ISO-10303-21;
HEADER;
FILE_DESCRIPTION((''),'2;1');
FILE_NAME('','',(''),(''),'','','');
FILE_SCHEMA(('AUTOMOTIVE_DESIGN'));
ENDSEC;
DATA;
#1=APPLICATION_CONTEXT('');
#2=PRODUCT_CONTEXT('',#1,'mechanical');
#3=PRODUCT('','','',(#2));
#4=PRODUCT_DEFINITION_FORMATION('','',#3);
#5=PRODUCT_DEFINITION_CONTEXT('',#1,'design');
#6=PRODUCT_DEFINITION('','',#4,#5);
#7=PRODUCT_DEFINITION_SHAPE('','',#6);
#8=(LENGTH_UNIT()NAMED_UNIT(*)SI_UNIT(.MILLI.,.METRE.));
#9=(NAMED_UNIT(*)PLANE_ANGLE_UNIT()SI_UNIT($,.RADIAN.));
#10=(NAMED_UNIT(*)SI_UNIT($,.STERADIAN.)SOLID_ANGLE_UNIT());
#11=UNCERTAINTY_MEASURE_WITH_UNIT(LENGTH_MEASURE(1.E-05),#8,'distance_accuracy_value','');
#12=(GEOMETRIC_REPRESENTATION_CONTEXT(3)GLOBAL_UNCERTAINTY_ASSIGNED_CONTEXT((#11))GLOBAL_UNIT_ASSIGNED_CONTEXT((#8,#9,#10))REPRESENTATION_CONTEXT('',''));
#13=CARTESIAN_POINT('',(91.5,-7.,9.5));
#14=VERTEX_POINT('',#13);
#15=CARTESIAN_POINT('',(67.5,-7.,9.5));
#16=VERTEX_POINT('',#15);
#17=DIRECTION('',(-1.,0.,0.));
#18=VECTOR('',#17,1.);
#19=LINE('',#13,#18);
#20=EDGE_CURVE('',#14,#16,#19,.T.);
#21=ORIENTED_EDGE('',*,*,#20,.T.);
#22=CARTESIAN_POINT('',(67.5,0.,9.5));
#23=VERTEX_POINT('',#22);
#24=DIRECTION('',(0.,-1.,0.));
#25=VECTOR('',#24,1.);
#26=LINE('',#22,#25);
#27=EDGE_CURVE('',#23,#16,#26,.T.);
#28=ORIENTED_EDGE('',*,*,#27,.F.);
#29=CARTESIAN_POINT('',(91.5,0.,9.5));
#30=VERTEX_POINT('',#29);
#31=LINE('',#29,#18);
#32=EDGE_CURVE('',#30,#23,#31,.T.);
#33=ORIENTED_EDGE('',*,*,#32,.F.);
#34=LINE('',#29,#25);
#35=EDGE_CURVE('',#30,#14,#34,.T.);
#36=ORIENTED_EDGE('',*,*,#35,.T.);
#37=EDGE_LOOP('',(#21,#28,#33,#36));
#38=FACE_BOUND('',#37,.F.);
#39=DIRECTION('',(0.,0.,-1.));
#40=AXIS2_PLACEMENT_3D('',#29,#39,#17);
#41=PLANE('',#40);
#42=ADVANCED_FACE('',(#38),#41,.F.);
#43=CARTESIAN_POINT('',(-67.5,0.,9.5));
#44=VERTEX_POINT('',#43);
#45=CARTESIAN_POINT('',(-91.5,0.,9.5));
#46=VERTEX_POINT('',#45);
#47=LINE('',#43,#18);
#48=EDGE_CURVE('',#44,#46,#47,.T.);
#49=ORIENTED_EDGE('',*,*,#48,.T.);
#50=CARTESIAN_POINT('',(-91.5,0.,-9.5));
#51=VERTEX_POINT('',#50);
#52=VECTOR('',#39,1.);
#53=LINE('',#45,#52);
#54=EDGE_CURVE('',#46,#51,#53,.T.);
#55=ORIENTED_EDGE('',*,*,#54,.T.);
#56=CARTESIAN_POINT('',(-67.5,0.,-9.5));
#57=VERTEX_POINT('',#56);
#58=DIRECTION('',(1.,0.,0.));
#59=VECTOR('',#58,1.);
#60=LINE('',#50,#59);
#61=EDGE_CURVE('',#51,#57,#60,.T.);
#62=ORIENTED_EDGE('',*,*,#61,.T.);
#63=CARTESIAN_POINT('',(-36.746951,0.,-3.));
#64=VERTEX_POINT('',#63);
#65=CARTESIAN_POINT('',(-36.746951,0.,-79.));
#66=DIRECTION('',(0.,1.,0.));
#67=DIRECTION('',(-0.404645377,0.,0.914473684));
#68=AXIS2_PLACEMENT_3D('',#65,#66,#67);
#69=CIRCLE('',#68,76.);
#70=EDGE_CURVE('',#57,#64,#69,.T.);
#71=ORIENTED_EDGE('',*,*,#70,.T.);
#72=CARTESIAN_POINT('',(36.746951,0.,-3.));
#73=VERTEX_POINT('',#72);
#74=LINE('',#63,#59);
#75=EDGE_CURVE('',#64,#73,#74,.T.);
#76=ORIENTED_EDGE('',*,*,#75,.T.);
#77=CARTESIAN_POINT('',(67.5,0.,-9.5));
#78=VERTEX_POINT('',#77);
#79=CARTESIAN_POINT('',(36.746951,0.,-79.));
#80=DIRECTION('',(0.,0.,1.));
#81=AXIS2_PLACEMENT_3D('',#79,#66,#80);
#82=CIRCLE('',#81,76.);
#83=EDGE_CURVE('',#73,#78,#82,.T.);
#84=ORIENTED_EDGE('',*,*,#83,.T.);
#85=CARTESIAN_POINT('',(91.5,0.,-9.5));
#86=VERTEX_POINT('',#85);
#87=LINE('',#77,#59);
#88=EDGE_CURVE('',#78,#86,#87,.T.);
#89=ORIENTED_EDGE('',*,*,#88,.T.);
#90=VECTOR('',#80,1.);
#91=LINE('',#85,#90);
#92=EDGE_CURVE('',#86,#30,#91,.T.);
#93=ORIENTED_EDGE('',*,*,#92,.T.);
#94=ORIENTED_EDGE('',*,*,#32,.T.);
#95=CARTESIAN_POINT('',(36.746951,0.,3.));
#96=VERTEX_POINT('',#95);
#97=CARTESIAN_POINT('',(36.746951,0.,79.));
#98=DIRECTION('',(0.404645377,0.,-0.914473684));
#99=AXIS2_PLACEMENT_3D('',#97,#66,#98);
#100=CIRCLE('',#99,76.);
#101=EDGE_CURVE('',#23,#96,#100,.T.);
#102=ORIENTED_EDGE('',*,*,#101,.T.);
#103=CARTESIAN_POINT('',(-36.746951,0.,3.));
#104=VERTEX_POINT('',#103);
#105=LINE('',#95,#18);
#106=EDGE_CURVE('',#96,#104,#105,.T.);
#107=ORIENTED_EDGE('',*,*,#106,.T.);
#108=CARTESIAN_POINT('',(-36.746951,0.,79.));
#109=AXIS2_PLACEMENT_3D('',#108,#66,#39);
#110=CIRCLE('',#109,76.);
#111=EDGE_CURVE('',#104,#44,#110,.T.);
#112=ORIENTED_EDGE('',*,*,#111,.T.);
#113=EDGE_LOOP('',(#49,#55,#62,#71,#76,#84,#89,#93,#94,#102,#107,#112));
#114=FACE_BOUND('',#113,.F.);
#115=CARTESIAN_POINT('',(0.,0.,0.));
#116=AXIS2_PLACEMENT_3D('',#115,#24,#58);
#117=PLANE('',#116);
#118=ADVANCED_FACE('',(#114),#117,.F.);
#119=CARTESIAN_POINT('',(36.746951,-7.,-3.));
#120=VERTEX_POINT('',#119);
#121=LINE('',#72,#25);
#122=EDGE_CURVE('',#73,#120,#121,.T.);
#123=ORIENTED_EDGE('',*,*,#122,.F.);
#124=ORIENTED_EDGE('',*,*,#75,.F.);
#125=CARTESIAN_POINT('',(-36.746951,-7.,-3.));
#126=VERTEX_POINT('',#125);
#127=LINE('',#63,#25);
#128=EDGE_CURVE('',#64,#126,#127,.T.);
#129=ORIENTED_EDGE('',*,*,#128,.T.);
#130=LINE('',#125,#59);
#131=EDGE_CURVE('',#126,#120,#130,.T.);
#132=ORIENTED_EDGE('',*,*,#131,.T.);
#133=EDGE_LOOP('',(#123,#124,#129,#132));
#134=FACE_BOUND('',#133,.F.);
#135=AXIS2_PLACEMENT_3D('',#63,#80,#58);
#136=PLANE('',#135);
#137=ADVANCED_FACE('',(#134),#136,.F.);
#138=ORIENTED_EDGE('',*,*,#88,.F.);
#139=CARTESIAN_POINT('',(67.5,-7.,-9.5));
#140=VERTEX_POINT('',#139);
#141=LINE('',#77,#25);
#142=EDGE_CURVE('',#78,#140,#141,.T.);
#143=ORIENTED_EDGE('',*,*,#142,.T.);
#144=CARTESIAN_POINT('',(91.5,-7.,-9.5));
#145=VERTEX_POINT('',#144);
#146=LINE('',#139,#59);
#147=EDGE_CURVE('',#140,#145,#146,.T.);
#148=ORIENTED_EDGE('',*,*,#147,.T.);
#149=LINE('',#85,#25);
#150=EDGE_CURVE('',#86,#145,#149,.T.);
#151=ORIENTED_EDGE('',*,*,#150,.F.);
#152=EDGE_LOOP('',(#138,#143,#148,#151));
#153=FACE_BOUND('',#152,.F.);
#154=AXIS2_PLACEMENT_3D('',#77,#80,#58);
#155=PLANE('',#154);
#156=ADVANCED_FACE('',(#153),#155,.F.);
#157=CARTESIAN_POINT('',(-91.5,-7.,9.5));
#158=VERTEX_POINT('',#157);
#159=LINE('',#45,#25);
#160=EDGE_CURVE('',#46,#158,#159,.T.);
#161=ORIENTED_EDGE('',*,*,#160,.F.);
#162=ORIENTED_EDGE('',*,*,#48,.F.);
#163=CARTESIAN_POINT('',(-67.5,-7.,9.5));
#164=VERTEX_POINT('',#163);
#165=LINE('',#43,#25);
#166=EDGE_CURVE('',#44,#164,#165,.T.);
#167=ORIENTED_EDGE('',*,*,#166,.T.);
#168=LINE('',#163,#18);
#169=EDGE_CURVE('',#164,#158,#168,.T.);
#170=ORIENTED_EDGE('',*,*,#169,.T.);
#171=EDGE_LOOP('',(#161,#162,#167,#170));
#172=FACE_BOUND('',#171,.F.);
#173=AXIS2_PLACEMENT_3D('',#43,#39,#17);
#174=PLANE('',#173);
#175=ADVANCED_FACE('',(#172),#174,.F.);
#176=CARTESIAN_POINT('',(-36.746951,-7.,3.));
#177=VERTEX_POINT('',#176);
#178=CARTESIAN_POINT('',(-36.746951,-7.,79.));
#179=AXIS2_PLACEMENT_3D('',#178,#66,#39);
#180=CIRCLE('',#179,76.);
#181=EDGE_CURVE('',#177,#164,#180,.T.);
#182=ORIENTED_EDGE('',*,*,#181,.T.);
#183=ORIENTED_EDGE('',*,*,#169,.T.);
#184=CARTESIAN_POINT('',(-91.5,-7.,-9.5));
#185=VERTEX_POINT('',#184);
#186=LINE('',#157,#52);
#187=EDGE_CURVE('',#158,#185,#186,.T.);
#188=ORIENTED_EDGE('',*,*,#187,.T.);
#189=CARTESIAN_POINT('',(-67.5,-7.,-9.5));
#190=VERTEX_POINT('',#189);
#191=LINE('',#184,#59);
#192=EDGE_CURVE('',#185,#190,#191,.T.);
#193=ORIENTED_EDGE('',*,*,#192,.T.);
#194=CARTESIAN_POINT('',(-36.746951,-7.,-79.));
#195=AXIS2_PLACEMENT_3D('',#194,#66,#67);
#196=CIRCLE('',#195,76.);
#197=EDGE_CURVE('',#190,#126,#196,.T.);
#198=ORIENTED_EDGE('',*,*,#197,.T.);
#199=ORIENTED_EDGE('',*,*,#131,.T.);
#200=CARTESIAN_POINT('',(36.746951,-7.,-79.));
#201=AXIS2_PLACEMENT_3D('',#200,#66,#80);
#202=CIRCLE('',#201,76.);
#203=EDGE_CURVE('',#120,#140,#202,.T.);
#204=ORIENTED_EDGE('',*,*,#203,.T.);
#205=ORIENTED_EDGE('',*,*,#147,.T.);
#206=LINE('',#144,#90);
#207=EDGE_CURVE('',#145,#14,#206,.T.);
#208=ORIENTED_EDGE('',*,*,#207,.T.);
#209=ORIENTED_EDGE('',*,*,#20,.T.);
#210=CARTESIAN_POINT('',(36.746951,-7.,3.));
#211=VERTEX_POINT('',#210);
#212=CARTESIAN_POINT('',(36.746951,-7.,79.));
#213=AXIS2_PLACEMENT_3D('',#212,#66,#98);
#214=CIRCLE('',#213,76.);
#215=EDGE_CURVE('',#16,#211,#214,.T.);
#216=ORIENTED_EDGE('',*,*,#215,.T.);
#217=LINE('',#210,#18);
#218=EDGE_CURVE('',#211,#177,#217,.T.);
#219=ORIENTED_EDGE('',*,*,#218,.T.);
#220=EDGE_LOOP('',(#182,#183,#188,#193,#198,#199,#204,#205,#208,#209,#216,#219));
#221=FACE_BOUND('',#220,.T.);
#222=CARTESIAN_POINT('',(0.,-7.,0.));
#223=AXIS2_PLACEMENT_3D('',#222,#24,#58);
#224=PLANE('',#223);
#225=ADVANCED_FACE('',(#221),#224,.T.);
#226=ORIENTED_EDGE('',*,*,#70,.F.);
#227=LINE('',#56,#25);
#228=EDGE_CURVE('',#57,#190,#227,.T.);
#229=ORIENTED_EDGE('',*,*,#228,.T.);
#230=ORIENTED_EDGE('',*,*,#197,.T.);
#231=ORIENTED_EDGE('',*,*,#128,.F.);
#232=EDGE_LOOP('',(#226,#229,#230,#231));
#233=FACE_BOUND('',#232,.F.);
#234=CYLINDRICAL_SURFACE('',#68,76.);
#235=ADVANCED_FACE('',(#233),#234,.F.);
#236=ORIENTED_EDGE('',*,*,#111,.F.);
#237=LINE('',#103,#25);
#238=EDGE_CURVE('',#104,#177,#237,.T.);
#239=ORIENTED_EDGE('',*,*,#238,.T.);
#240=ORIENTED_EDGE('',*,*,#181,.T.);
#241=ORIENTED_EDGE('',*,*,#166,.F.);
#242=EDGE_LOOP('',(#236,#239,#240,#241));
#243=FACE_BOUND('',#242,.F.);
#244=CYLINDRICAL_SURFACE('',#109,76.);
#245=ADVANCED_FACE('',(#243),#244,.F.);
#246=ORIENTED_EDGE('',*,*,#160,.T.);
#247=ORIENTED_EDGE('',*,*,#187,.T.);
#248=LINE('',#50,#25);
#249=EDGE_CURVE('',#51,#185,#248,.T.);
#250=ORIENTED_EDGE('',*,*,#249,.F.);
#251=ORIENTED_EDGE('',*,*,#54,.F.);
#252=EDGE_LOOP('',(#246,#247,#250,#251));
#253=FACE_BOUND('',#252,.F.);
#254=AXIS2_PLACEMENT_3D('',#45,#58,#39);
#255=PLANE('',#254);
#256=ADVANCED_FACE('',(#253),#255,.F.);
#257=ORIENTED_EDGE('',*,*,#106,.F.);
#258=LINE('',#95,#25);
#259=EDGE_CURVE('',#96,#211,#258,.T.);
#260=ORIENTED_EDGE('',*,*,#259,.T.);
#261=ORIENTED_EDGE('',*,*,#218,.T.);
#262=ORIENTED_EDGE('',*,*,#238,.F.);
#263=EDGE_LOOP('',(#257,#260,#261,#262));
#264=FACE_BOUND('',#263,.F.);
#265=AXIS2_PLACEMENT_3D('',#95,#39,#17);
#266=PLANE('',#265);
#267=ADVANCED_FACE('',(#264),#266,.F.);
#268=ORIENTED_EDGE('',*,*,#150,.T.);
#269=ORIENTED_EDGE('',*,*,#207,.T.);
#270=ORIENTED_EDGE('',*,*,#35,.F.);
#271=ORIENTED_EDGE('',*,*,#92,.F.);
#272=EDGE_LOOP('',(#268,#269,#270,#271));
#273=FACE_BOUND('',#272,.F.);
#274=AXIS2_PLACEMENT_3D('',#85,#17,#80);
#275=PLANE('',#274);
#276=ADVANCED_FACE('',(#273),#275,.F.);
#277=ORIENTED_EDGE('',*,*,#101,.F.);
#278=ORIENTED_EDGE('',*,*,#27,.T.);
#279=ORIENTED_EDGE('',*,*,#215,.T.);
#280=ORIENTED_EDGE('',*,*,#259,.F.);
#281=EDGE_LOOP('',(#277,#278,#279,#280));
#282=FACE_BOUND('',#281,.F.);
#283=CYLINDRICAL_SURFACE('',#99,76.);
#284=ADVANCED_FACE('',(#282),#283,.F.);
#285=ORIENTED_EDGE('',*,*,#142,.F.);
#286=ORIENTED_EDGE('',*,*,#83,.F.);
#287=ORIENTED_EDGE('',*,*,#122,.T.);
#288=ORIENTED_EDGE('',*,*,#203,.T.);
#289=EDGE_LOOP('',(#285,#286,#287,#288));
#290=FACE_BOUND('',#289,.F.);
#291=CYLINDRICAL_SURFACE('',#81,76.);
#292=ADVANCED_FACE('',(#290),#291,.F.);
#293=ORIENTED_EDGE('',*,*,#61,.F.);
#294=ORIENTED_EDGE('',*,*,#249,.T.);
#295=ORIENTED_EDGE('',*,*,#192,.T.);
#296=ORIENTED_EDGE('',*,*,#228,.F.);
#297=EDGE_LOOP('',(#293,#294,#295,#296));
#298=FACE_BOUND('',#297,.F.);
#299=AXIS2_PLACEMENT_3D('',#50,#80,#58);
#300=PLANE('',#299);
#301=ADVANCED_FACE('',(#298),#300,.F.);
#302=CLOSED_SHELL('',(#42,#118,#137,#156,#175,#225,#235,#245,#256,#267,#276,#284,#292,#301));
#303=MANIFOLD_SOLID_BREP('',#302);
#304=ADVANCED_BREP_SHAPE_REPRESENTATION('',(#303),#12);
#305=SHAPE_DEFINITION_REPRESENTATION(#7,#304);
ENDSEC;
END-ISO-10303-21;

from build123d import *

# Parameters (mm, degrees)
F1_DEPTH = 7


# Not quite as in the source:
# - ends of sketch curves that miss each other by under 0.0002 mm in the source are joined


with BuildPart() as f1:
    # F0 (on Front) → F1 (new body)
    with BuildSketch(Plane.XZ):
        with BuildLine():
            Line((36.7469513706, 3), (1.8211e-06, 3))
            Line((1.8211e-06, 3), (-36.7469513706, 3))
            ThreePointArc((-36.7469513706, 3), (-52.4631850161, 4.6427542199), (-67.5, 9.5))
            Line((-67.5, 9.5), (-91.5, 9.5))
            Line((-91.5, 9.5), (-91.5, 0))
            Line((-91.5, 0), (-91.5, -9.5))
            Line((-91.5, -9.5), (-67.5, -9.5))
            ThreePointArc((-67.5, -9.5), (-52.4631850161, -4.6427542199), (-36.7469513706, -3))
            Line((-36.7469513706, -3), (-1.8211e-06, -3))
            Line((-1.8211e-06, -3), (36.7469513706, -3))
            ThreePointArc((36.7469513706, -3), (52.4631850161, -4.6427542199), (67.5, -9.5))
            Line((67.5, -9.5), (91.5, -9.5))
            Line((91.5, -9.5), (91.5, 0))
            Line((91.5, 0), (91.5, 9.5))
            Line((91.5, 9.5), (67.5, 9.5))
            ThreePointArc((67.5, 9.5), (52.4631850161, 4.6427542199), (36.7469513706, 3))
        make_face()
    extrude(amount=F1_DEPTH)


solid = f1.part
